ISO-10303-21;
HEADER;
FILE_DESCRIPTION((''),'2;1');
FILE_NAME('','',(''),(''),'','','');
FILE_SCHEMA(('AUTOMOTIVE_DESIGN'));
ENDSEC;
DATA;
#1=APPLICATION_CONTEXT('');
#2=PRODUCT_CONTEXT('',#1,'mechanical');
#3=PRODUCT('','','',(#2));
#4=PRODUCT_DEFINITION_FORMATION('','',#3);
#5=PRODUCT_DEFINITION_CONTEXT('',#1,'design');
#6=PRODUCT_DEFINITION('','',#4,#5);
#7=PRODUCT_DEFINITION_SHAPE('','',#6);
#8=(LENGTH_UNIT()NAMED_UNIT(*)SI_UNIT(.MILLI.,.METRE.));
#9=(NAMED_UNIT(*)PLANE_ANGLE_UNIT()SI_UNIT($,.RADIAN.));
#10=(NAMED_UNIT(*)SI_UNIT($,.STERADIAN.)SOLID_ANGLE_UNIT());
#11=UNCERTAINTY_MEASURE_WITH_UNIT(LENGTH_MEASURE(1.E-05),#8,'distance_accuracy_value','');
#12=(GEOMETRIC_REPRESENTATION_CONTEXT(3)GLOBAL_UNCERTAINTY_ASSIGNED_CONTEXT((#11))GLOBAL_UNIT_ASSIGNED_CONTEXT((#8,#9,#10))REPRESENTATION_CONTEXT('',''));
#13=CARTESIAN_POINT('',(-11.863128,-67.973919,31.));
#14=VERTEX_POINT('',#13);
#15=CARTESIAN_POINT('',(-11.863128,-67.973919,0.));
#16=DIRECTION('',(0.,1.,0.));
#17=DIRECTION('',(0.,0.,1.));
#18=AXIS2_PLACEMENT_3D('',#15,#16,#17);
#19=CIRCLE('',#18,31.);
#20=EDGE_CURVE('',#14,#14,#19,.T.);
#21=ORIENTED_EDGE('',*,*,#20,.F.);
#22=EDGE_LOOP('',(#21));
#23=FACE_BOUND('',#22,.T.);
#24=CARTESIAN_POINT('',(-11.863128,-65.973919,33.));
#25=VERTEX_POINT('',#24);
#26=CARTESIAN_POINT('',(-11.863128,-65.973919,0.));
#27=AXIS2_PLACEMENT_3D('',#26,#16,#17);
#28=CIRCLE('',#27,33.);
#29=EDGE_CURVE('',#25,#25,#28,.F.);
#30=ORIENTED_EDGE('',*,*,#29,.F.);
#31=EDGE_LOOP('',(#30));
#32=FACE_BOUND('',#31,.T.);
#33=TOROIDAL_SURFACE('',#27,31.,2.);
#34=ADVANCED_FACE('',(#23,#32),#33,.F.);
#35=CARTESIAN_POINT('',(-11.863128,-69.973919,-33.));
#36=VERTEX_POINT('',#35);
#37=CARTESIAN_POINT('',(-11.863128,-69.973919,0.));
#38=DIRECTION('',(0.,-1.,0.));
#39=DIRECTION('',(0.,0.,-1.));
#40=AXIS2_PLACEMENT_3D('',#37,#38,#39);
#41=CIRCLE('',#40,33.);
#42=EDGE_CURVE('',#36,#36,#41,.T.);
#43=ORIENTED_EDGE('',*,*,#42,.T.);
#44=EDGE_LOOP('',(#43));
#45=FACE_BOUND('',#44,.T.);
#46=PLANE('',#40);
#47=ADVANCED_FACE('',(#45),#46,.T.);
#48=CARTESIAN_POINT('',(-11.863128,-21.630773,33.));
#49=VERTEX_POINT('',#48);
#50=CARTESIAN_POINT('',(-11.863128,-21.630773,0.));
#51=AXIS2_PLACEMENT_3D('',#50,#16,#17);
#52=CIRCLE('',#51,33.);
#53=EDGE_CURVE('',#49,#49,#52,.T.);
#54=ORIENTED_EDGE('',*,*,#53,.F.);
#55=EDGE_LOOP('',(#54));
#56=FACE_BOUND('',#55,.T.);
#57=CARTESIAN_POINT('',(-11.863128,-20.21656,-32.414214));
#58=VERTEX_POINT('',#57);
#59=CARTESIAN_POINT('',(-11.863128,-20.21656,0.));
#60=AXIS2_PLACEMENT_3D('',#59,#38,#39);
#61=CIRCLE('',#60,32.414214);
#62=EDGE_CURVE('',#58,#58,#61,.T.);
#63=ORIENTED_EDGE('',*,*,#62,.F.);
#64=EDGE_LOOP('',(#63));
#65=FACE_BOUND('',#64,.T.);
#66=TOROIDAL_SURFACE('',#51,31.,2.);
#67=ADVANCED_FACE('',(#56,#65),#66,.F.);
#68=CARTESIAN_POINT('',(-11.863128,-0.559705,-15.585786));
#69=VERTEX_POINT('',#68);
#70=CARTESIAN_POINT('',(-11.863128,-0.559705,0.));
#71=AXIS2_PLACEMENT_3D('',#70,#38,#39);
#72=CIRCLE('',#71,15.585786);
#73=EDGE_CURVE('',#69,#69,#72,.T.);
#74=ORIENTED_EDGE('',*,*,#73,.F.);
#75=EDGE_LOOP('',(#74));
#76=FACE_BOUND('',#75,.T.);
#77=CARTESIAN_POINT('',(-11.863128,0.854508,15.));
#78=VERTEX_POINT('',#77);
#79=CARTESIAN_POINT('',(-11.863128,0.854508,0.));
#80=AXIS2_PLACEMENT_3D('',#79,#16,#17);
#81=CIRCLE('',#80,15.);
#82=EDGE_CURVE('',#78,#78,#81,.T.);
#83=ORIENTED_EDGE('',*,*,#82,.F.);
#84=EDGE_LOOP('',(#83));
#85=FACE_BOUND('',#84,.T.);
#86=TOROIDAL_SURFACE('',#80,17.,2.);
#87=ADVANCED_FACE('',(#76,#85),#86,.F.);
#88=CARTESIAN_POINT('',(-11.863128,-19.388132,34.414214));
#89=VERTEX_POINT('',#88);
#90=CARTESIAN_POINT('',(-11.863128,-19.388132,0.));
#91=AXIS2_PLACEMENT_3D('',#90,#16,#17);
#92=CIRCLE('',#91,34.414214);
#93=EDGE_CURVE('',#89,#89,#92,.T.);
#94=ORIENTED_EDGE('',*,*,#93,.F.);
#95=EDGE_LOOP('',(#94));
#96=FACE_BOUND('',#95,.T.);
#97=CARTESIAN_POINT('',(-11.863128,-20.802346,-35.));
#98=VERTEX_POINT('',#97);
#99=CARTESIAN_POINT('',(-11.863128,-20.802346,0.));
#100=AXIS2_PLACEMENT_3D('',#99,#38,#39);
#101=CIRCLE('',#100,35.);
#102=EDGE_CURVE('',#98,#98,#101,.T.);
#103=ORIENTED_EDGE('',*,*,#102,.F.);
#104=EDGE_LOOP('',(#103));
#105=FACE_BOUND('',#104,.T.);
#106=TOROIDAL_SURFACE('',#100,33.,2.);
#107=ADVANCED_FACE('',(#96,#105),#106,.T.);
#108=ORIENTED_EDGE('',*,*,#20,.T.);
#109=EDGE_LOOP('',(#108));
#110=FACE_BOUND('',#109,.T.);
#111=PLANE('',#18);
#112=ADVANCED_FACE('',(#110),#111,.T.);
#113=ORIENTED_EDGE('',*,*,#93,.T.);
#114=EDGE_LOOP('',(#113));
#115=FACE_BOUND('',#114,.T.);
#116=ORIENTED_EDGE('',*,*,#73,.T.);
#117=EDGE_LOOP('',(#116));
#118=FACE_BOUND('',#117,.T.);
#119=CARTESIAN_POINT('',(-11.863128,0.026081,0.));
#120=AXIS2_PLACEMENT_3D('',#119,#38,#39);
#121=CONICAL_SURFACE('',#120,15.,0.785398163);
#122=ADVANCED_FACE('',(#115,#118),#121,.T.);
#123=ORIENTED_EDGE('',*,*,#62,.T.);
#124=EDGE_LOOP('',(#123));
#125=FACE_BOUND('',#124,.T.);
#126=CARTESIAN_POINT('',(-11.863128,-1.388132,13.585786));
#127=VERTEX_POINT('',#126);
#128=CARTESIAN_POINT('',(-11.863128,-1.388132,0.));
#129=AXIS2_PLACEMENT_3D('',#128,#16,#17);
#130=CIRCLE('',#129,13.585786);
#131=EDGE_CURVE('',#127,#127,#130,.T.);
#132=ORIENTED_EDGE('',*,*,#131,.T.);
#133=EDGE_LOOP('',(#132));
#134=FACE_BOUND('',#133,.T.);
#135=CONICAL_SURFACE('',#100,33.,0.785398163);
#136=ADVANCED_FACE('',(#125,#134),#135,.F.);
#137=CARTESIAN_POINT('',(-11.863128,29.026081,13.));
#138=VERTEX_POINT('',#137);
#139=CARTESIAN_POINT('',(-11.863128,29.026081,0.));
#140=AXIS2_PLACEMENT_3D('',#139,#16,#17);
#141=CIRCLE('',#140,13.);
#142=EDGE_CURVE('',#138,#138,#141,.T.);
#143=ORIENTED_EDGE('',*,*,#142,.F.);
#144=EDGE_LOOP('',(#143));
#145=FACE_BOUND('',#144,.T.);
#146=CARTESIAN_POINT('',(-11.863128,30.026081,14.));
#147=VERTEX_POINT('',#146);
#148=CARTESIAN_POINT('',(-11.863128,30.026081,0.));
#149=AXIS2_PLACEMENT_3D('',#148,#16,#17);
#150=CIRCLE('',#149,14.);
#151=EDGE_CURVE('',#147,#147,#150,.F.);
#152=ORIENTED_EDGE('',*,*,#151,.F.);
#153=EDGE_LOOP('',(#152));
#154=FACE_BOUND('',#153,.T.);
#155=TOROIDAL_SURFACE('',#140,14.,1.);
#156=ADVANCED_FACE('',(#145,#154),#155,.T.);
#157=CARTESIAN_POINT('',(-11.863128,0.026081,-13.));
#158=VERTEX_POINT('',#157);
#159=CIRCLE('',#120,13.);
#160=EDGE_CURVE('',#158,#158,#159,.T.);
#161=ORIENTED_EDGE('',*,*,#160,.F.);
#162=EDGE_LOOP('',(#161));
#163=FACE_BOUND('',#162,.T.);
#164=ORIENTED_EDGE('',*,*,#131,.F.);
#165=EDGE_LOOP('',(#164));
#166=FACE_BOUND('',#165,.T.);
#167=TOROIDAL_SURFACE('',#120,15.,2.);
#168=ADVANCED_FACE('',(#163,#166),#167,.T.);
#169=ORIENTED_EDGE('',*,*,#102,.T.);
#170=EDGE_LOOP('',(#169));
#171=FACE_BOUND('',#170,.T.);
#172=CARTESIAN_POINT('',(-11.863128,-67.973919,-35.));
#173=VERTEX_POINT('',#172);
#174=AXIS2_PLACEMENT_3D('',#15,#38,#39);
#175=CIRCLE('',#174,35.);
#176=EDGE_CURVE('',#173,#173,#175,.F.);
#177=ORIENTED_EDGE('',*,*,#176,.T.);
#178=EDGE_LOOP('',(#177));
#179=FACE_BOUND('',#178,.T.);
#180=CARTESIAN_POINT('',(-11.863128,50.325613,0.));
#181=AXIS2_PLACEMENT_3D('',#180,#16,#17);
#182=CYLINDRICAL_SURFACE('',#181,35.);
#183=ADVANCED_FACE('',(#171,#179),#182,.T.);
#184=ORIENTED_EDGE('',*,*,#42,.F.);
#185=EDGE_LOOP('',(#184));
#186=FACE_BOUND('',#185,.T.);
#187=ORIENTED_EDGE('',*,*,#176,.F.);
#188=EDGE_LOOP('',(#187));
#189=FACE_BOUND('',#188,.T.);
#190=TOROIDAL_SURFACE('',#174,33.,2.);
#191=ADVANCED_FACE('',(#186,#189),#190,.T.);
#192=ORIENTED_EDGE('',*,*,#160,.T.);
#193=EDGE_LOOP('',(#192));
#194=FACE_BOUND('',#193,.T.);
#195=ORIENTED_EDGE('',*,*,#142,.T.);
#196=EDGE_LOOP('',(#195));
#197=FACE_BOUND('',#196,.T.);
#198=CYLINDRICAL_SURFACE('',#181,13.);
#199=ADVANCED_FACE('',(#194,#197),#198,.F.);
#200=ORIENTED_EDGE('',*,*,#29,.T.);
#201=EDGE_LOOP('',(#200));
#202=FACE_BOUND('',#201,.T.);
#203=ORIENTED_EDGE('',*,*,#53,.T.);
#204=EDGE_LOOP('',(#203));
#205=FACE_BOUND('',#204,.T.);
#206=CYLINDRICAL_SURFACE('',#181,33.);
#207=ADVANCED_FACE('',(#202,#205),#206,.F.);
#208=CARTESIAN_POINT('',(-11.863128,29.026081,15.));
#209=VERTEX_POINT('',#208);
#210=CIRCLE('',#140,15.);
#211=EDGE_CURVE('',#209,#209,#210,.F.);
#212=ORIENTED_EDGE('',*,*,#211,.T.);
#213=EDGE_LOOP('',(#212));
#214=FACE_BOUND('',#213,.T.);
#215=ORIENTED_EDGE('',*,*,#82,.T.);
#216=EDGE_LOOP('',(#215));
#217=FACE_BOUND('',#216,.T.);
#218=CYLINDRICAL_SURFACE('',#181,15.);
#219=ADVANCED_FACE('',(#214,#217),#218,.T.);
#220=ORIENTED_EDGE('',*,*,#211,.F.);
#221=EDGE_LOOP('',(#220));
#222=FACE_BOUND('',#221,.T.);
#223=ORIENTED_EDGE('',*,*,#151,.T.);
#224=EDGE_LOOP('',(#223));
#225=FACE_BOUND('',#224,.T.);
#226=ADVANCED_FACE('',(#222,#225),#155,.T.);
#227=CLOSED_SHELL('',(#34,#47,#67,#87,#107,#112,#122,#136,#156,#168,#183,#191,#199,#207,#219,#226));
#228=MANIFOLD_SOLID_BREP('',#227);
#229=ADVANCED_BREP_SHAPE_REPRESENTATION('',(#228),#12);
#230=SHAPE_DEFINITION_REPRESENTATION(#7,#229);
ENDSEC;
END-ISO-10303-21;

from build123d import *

# Parameters (mm, degrees)
FILLET_3_R = 2
FILLET_4_R = 1
FILLET_5_R = 2


with BuildPart() as part:
    # 스케치1 → 회전1 (revolve)
    with BuildSketch(Plane.XY, mode=Mode.PRIVATE) as revolve_1_sk:
        Polygon((-11.86312796, -69.973918824), (-46.86312796, -69.973918824), (-46.86312796, -19.973918824), (-26.86312796, 0.026081176), (-26.86312796, 30.026081176), (-24.86312796, 30.026081176), (-24.86312796, 28.026081176), (-24.86312796, -0.802345949), (-44.86312796, -20.802345949), (-44.86312796, -67.973918824), (-11.86312796, -67.973918824), align=None)
    revolve(revolve_1_sk.sketch.rotate(Axis((-11.86312796, 50.325613141, 0), (0, -1, 0)), 270), axis=Axis((-11.86312796, 50.325613141, 0), (0, -1, 0)))

    # 필렛3
    fillet_3_edges = [part.edges().sort_by_distance(p)[0] for p in [
        (-11.86312796, 0.026081176, -15),
        (-11.86312796, -19.973918824, -35),
        (-11.86312796, -67.973918824, -33),
        (-11.86312796, -20.802345949, -33),
        (-11.86312796, -0.802345949, -13),
    ]]
    fillet(fillet_3_edges, radius=FILLET_3_R)

    # 필렛4
    fillet_4_edges = [part.edges().sort_by_distance(p)[0] for p in [
        (-11.86312796, 30.026081176, -15),
        (-11.86312796, 30.026081176, -13),
    ]]
    fillet(fillet_4_edges, radius=FILLET_4_R - 0.0001)  # a hair under: the kernel refuses the full size

    # 필렛5
    fillet_5_edges = [part.edges().sort_by_distance(p)[0] for p in [
        (-11.86312796, -69.973918824, -35),
    ]]
    fillet(fillet_5_edges, radius=FILLET_5_R)


solid = part.part
